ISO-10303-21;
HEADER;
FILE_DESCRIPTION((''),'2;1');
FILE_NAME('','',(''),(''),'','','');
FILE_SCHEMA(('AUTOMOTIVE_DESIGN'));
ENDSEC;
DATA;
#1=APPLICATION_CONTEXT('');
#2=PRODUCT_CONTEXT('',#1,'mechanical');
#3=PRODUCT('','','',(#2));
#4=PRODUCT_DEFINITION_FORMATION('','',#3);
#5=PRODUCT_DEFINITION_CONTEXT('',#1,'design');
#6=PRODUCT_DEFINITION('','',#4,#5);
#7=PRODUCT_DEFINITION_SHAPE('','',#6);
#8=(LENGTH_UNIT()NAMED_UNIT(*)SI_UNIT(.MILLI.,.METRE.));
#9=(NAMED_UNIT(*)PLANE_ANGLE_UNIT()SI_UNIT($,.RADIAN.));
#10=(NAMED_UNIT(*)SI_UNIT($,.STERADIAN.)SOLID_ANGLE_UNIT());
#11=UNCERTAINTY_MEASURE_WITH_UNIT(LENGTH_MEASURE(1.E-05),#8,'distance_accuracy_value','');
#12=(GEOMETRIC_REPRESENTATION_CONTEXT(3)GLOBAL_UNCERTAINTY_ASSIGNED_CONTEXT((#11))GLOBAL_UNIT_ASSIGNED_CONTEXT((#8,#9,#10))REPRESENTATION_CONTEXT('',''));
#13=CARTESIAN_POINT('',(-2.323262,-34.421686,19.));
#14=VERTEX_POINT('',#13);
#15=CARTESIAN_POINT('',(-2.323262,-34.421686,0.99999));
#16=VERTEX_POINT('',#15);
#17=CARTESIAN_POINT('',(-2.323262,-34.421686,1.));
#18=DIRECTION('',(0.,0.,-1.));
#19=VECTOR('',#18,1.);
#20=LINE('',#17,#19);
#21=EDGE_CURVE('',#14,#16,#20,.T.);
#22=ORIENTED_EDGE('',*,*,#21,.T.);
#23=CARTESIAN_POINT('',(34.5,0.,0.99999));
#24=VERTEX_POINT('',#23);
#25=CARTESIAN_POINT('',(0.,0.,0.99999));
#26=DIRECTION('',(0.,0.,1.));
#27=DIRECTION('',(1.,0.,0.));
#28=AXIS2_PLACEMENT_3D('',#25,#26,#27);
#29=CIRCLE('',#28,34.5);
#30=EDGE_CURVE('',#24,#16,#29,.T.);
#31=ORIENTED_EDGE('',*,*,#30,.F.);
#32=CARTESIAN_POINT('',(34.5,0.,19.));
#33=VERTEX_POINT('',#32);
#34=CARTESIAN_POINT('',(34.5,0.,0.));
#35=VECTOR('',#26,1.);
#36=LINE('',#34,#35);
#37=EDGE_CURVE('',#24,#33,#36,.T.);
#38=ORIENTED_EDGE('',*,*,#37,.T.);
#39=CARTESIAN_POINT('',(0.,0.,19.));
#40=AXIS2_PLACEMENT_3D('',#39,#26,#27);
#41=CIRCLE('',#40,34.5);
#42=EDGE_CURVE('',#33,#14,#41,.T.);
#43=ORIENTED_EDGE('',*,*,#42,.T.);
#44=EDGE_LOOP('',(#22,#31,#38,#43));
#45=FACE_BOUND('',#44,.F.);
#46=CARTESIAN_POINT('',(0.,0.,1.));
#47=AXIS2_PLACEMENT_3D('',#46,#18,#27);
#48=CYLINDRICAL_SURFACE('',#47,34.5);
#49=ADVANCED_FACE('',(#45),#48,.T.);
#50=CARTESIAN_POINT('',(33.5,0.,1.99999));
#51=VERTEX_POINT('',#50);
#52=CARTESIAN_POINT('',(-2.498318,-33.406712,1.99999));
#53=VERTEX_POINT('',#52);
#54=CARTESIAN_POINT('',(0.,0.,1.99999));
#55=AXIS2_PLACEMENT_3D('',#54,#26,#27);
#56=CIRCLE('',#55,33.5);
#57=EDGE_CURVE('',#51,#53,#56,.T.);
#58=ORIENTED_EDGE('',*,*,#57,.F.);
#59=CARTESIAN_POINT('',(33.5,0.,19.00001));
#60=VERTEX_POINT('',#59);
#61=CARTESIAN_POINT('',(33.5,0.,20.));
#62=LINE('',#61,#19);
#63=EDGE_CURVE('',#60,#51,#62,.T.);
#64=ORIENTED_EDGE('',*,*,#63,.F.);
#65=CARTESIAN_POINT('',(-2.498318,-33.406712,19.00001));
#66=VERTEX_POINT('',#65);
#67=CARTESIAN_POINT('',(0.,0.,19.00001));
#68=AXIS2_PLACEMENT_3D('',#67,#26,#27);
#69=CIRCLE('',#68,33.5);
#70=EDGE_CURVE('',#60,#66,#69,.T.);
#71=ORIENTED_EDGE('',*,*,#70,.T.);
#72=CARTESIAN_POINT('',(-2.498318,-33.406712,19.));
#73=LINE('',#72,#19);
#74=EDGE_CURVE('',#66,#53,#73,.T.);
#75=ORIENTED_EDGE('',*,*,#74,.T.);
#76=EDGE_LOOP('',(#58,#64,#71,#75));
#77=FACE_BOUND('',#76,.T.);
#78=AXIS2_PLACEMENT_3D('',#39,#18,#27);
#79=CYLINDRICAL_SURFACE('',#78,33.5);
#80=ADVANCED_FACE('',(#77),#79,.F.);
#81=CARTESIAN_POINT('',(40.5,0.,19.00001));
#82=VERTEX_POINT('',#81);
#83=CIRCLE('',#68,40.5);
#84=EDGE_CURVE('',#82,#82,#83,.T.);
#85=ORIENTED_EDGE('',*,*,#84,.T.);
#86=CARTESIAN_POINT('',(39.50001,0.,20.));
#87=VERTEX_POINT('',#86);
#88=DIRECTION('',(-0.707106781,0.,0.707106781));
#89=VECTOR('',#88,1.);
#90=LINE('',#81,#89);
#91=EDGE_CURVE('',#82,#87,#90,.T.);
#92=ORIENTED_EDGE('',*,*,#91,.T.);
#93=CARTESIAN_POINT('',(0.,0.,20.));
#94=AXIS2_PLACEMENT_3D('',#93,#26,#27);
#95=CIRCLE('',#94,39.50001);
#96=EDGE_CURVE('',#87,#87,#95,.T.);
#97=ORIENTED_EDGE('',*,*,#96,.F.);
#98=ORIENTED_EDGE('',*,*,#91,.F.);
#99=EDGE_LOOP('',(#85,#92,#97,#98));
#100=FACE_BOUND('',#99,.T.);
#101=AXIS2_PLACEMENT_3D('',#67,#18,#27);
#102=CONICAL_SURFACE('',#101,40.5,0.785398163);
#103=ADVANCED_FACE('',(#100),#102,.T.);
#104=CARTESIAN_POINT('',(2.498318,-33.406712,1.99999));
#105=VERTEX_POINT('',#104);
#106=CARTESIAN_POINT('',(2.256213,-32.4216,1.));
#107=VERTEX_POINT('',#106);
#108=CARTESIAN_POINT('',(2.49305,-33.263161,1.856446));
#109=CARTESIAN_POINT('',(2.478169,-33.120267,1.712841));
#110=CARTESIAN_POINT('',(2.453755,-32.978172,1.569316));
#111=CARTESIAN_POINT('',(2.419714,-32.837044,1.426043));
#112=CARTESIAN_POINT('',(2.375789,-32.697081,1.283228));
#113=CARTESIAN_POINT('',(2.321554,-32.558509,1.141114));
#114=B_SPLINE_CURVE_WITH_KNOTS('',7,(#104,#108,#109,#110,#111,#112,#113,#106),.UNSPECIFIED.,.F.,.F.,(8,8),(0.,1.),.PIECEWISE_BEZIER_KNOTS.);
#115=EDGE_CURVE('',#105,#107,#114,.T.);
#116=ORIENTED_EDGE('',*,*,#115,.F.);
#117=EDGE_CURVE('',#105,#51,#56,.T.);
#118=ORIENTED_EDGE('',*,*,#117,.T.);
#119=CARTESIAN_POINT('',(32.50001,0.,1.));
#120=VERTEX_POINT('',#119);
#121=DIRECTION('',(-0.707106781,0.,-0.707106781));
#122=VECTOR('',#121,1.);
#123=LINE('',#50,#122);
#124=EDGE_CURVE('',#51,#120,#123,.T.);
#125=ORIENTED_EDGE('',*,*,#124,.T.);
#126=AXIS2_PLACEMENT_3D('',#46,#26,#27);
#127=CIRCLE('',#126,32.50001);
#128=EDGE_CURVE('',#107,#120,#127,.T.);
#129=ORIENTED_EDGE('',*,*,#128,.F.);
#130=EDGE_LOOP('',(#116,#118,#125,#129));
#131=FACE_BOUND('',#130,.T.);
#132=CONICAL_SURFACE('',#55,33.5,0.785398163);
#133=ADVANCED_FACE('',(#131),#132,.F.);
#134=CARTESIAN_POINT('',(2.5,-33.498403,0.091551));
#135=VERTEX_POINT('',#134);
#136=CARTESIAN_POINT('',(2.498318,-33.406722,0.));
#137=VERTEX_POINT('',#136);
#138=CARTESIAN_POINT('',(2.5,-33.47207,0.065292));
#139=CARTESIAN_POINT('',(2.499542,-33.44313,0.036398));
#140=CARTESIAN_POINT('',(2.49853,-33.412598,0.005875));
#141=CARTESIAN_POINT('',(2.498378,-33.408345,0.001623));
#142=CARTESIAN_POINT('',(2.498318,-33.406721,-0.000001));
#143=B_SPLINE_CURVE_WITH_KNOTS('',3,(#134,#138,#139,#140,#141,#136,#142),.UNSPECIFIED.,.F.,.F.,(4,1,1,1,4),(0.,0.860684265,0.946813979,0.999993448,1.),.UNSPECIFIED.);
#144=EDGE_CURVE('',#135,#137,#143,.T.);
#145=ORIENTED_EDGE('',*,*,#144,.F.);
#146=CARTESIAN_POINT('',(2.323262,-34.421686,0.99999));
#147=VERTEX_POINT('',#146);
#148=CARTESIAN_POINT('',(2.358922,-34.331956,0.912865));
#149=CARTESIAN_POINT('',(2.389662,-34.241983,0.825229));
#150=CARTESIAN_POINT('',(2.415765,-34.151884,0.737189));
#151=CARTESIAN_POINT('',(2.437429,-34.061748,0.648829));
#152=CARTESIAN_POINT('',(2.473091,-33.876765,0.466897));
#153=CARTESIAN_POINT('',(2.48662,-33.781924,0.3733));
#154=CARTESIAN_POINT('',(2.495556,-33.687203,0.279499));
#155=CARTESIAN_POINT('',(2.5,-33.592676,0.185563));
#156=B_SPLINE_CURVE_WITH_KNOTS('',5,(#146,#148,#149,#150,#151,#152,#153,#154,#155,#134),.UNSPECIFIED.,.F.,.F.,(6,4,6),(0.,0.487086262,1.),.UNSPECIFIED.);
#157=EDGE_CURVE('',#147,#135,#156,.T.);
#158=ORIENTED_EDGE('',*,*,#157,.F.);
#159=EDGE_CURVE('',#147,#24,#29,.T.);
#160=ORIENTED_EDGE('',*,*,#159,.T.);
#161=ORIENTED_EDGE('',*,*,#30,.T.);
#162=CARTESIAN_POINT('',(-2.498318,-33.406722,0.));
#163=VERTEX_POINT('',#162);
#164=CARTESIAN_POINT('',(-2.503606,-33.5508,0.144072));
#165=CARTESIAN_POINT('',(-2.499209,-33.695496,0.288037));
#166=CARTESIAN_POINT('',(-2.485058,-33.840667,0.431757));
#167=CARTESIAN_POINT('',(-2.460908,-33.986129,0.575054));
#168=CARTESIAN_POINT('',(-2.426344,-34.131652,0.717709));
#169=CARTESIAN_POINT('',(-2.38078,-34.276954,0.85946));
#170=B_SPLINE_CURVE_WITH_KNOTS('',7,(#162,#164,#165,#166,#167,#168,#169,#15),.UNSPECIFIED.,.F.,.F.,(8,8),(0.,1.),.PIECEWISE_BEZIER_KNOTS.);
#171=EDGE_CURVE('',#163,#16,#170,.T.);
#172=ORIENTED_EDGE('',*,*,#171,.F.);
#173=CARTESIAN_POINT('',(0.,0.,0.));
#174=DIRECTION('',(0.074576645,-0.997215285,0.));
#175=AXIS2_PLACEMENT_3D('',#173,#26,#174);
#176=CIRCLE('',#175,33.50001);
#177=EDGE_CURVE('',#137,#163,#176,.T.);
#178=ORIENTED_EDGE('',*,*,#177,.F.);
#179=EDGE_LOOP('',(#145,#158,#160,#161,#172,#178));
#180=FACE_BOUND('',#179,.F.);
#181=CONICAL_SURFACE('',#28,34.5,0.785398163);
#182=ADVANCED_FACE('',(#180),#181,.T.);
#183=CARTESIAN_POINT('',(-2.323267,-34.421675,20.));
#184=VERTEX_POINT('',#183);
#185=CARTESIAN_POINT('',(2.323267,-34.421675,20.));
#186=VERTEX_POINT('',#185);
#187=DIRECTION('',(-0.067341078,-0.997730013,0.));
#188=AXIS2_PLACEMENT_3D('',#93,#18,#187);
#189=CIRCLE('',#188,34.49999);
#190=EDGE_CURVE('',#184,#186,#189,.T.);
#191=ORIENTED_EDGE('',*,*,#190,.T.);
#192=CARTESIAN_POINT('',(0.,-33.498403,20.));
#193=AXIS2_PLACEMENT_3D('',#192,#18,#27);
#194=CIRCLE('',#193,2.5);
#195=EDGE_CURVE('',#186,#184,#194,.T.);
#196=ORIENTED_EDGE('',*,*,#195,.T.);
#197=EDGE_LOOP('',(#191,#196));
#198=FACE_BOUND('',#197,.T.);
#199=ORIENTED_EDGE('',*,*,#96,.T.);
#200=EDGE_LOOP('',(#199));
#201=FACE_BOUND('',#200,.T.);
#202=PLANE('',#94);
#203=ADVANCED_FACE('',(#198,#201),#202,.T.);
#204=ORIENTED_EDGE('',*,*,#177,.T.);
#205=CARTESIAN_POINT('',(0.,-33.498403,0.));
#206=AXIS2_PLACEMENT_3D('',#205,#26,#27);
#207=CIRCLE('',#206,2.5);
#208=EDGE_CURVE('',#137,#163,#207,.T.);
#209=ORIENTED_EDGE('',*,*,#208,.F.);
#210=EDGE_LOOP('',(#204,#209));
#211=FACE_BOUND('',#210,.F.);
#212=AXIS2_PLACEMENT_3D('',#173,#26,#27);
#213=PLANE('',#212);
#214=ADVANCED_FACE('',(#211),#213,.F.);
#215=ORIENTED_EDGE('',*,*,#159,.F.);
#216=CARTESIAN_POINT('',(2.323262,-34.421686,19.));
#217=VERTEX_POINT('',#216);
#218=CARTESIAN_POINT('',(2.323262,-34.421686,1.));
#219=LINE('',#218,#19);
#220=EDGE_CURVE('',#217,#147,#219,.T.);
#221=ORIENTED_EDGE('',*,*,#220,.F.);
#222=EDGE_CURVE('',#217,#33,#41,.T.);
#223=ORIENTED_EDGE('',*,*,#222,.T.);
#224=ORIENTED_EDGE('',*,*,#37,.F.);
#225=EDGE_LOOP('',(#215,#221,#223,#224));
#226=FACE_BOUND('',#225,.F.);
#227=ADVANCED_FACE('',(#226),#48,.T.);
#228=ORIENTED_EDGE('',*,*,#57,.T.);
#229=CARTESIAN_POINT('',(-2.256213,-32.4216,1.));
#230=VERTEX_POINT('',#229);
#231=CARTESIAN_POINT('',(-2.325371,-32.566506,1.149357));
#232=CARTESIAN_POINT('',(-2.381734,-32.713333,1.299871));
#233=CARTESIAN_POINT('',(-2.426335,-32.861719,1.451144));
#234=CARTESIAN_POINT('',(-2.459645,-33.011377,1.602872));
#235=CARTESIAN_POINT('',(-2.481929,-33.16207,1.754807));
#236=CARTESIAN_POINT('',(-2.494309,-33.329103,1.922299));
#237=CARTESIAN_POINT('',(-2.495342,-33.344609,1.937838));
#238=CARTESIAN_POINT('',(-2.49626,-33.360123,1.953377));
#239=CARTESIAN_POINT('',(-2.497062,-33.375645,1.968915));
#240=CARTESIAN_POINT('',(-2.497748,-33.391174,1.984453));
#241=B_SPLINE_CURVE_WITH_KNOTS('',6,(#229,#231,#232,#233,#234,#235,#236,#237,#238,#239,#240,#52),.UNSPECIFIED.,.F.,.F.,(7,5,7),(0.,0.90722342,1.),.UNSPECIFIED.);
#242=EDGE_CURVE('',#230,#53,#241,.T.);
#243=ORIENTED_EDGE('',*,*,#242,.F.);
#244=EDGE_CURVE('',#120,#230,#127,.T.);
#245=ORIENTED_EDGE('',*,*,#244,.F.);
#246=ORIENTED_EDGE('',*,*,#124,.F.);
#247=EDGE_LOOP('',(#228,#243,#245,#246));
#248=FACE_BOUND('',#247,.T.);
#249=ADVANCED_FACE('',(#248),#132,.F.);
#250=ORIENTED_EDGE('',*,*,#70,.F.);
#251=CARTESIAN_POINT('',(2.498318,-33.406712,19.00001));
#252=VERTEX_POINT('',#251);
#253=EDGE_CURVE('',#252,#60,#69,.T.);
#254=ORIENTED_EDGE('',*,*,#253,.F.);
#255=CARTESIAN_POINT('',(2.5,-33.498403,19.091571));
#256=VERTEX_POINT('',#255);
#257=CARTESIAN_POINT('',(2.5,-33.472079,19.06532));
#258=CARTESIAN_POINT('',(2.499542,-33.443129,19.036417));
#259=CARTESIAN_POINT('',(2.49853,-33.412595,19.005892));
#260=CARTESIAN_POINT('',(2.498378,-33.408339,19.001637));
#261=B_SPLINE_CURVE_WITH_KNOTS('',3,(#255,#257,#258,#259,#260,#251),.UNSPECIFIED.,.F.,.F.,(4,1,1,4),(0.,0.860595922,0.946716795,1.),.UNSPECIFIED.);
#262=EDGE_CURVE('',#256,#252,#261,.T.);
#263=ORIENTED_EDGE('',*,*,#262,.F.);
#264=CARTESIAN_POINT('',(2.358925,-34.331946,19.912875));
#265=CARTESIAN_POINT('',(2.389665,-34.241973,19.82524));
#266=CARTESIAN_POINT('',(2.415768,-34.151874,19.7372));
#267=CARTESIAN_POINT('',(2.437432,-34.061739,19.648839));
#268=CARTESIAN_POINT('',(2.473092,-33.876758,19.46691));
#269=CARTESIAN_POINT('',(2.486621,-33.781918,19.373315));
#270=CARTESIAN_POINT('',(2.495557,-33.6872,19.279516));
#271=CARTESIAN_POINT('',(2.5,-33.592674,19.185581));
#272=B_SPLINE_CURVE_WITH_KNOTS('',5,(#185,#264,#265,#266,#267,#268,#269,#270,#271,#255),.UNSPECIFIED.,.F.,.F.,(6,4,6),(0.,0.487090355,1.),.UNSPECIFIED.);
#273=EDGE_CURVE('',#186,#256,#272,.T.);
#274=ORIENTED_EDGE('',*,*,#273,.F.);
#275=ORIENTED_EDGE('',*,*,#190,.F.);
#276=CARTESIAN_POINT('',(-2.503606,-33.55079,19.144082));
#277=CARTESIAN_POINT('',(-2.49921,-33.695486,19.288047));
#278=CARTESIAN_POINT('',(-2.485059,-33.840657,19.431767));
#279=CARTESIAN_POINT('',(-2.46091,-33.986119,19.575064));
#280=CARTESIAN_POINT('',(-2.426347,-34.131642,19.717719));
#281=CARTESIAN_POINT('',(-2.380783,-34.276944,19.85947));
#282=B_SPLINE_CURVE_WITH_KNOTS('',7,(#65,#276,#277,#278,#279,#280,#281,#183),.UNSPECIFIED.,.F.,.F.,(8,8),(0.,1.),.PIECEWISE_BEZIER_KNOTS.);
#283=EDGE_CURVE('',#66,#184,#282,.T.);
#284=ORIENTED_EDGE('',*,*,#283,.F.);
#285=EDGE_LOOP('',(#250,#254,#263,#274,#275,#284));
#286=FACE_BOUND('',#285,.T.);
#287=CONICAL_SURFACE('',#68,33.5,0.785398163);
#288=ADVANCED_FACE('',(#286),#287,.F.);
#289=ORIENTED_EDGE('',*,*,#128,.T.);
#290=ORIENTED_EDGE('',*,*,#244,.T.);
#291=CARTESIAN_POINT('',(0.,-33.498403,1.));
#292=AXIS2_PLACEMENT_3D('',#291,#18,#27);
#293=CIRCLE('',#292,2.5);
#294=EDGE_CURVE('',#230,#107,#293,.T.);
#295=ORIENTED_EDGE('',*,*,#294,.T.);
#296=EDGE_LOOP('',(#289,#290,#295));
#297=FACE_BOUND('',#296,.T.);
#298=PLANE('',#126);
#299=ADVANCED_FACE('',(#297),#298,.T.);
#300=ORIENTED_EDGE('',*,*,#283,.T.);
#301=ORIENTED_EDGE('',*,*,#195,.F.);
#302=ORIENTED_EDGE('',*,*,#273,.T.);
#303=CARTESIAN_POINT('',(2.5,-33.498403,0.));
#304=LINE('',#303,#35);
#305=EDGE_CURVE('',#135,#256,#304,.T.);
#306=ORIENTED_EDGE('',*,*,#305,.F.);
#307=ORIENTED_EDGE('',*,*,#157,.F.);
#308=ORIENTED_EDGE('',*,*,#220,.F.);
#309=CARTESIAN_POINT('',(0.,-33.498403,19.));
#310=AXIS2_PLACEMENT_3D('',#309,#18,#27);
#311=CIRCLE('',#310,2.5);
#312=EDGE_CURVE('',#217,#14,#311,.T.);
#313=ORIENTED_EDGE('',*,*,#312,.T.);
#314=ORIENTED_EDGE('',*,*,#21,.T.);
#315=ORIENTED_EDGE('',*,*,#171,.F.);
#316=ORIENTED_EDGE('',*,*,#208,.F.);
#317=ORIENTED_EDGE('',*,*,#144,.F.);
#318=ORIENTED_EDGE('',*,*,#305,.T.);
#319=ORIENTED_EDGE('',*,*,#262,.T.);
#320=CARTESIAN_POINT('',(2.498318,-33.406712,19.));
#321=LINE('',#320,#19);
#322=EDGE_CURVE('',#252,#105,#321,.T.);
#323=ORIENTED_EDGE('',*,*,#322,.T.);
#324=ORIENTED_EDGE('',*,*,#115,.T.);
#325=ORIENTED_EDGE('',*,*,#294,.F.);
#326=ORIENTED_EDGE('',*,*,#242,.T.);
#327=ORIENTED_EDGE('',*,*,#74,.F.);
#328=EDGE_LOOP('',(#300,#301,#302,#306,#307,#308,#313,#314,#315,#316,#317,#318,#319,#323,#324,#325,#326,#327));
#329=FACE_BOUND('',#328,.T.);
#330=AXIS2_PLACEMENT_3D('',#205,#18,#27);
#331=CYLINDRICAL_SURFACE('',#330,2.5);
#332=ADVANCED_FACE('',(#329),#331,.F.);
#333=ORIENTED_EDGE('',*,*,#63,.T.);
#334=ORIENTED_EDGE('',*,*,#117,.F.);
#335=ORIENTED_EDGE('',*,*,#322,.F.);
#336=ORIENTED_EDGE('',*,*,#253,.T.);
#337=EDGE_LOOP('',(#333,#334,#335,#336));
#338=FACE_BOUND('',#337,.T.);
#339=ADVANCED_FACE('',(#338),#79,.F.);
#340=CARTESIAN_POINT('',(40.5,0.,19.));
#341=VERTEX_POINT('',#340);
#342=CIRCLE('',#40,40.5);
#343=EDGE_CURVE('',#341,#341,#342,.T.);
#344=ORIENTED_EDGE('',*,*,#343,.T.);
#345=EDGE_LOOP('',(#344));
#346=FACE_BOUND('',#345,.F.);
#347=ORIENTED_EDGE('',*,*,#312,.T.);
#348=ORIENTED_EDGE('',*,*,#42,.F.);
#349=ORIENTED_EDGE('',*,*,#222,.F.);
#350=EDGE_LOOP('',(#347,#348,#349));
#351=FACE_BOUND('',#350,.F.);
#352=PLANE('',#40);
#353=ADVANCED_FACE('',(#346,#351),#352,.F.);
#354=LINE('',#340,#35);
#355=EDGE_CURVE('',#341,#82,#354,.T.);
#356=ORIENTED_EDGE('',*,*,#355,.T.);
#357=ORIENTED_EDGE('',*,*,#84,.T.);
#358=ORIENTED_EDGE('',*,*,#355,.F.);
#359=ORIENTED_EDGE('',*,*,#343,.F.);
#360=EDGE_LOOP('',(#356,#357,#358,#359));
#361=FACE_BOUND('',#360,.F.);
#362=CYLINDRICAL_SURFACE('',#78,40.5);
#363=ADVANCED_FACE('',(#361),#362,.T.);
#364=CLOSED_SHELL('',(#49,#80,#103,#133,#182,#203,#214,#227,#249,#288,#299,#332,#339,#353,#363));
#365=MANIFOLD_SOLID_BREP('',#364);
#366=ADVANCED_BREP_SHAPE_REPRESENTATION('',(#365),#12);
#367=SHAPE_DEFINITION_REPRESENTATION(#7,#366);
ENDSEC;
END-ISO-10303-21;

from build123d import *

# Parameters (mm, degrees)
F0_R     = 34.5
F1_DEPTH = 1
F2_R     = 34.5
F2_R_2   = 33.5
F3_DEPTH = 18
F4_R     = 40.5
F4_R_2   = 34.5
F4_R_3   = 33.5
F5_DEPTH = 1
F6_SIZE  = 0.99999
F7_R     = 2.5
F8_DEPTH = 25


# Not quite as in the source:
# - a fillet or chamfer is up to 0.001 mm smaller than in the source, because OpenCascade refuses the exact size


with BuildPart() as f1:
    # F0 (on Top) → F1 (new body)
    with BuildSketch(Plane.XY):
        Circle(F0_R)
    extrude(amount=F1_DEPTH)

    # F2 (on face) → F3 (join)
    with BuildSketch(Plane.XY.offset(1)):
        Circle(F2_R)
        Circle(F2_R_2, mode=Mode.SUBTRACT)
    extrude(amount=F3_DEPTH)

    # F4 (on face) → F5 (join)
    with BuildSketch(Plane.XY.offset(19)):
        Circle(F4_R)
        Circle(F4_R_2, mode=Mode.SUBTRACT)
        Circle(F4_R_2)
        Circle(F4_R_3, mode=Mode.SUBTRACT)
    extrude(amount=F5_DEPTH)

    # F6 (size 1 in the source; OpenCascade refuses exactly that, so slightly less here)
    f6_edges = [f1.edges().sort_by_distance(p)[0] for p in [
        (-33.5, 0, 1),
        (-34.5, 0, 0),
        (-33.5, 0, 20),
        (-40.5, 0, 20),
    ]]
    chamfer(f6_edges, length=F6_SIZE)


with BuildPart() as f8:
    # F7 (on Top) → F8 (new body)
    with BuildSketch(Plane.XY):
        with Locations((0, -33.4984026849)):
            Circle(F7_R)
    extrude(amount=F8_DEPTH)


with BuildPart() as f1_1:
    add(f1.part)

    # F9: cut F8
    add(f8.part, mode=Mode.SUBTRACT)


solid = f1_1.part
